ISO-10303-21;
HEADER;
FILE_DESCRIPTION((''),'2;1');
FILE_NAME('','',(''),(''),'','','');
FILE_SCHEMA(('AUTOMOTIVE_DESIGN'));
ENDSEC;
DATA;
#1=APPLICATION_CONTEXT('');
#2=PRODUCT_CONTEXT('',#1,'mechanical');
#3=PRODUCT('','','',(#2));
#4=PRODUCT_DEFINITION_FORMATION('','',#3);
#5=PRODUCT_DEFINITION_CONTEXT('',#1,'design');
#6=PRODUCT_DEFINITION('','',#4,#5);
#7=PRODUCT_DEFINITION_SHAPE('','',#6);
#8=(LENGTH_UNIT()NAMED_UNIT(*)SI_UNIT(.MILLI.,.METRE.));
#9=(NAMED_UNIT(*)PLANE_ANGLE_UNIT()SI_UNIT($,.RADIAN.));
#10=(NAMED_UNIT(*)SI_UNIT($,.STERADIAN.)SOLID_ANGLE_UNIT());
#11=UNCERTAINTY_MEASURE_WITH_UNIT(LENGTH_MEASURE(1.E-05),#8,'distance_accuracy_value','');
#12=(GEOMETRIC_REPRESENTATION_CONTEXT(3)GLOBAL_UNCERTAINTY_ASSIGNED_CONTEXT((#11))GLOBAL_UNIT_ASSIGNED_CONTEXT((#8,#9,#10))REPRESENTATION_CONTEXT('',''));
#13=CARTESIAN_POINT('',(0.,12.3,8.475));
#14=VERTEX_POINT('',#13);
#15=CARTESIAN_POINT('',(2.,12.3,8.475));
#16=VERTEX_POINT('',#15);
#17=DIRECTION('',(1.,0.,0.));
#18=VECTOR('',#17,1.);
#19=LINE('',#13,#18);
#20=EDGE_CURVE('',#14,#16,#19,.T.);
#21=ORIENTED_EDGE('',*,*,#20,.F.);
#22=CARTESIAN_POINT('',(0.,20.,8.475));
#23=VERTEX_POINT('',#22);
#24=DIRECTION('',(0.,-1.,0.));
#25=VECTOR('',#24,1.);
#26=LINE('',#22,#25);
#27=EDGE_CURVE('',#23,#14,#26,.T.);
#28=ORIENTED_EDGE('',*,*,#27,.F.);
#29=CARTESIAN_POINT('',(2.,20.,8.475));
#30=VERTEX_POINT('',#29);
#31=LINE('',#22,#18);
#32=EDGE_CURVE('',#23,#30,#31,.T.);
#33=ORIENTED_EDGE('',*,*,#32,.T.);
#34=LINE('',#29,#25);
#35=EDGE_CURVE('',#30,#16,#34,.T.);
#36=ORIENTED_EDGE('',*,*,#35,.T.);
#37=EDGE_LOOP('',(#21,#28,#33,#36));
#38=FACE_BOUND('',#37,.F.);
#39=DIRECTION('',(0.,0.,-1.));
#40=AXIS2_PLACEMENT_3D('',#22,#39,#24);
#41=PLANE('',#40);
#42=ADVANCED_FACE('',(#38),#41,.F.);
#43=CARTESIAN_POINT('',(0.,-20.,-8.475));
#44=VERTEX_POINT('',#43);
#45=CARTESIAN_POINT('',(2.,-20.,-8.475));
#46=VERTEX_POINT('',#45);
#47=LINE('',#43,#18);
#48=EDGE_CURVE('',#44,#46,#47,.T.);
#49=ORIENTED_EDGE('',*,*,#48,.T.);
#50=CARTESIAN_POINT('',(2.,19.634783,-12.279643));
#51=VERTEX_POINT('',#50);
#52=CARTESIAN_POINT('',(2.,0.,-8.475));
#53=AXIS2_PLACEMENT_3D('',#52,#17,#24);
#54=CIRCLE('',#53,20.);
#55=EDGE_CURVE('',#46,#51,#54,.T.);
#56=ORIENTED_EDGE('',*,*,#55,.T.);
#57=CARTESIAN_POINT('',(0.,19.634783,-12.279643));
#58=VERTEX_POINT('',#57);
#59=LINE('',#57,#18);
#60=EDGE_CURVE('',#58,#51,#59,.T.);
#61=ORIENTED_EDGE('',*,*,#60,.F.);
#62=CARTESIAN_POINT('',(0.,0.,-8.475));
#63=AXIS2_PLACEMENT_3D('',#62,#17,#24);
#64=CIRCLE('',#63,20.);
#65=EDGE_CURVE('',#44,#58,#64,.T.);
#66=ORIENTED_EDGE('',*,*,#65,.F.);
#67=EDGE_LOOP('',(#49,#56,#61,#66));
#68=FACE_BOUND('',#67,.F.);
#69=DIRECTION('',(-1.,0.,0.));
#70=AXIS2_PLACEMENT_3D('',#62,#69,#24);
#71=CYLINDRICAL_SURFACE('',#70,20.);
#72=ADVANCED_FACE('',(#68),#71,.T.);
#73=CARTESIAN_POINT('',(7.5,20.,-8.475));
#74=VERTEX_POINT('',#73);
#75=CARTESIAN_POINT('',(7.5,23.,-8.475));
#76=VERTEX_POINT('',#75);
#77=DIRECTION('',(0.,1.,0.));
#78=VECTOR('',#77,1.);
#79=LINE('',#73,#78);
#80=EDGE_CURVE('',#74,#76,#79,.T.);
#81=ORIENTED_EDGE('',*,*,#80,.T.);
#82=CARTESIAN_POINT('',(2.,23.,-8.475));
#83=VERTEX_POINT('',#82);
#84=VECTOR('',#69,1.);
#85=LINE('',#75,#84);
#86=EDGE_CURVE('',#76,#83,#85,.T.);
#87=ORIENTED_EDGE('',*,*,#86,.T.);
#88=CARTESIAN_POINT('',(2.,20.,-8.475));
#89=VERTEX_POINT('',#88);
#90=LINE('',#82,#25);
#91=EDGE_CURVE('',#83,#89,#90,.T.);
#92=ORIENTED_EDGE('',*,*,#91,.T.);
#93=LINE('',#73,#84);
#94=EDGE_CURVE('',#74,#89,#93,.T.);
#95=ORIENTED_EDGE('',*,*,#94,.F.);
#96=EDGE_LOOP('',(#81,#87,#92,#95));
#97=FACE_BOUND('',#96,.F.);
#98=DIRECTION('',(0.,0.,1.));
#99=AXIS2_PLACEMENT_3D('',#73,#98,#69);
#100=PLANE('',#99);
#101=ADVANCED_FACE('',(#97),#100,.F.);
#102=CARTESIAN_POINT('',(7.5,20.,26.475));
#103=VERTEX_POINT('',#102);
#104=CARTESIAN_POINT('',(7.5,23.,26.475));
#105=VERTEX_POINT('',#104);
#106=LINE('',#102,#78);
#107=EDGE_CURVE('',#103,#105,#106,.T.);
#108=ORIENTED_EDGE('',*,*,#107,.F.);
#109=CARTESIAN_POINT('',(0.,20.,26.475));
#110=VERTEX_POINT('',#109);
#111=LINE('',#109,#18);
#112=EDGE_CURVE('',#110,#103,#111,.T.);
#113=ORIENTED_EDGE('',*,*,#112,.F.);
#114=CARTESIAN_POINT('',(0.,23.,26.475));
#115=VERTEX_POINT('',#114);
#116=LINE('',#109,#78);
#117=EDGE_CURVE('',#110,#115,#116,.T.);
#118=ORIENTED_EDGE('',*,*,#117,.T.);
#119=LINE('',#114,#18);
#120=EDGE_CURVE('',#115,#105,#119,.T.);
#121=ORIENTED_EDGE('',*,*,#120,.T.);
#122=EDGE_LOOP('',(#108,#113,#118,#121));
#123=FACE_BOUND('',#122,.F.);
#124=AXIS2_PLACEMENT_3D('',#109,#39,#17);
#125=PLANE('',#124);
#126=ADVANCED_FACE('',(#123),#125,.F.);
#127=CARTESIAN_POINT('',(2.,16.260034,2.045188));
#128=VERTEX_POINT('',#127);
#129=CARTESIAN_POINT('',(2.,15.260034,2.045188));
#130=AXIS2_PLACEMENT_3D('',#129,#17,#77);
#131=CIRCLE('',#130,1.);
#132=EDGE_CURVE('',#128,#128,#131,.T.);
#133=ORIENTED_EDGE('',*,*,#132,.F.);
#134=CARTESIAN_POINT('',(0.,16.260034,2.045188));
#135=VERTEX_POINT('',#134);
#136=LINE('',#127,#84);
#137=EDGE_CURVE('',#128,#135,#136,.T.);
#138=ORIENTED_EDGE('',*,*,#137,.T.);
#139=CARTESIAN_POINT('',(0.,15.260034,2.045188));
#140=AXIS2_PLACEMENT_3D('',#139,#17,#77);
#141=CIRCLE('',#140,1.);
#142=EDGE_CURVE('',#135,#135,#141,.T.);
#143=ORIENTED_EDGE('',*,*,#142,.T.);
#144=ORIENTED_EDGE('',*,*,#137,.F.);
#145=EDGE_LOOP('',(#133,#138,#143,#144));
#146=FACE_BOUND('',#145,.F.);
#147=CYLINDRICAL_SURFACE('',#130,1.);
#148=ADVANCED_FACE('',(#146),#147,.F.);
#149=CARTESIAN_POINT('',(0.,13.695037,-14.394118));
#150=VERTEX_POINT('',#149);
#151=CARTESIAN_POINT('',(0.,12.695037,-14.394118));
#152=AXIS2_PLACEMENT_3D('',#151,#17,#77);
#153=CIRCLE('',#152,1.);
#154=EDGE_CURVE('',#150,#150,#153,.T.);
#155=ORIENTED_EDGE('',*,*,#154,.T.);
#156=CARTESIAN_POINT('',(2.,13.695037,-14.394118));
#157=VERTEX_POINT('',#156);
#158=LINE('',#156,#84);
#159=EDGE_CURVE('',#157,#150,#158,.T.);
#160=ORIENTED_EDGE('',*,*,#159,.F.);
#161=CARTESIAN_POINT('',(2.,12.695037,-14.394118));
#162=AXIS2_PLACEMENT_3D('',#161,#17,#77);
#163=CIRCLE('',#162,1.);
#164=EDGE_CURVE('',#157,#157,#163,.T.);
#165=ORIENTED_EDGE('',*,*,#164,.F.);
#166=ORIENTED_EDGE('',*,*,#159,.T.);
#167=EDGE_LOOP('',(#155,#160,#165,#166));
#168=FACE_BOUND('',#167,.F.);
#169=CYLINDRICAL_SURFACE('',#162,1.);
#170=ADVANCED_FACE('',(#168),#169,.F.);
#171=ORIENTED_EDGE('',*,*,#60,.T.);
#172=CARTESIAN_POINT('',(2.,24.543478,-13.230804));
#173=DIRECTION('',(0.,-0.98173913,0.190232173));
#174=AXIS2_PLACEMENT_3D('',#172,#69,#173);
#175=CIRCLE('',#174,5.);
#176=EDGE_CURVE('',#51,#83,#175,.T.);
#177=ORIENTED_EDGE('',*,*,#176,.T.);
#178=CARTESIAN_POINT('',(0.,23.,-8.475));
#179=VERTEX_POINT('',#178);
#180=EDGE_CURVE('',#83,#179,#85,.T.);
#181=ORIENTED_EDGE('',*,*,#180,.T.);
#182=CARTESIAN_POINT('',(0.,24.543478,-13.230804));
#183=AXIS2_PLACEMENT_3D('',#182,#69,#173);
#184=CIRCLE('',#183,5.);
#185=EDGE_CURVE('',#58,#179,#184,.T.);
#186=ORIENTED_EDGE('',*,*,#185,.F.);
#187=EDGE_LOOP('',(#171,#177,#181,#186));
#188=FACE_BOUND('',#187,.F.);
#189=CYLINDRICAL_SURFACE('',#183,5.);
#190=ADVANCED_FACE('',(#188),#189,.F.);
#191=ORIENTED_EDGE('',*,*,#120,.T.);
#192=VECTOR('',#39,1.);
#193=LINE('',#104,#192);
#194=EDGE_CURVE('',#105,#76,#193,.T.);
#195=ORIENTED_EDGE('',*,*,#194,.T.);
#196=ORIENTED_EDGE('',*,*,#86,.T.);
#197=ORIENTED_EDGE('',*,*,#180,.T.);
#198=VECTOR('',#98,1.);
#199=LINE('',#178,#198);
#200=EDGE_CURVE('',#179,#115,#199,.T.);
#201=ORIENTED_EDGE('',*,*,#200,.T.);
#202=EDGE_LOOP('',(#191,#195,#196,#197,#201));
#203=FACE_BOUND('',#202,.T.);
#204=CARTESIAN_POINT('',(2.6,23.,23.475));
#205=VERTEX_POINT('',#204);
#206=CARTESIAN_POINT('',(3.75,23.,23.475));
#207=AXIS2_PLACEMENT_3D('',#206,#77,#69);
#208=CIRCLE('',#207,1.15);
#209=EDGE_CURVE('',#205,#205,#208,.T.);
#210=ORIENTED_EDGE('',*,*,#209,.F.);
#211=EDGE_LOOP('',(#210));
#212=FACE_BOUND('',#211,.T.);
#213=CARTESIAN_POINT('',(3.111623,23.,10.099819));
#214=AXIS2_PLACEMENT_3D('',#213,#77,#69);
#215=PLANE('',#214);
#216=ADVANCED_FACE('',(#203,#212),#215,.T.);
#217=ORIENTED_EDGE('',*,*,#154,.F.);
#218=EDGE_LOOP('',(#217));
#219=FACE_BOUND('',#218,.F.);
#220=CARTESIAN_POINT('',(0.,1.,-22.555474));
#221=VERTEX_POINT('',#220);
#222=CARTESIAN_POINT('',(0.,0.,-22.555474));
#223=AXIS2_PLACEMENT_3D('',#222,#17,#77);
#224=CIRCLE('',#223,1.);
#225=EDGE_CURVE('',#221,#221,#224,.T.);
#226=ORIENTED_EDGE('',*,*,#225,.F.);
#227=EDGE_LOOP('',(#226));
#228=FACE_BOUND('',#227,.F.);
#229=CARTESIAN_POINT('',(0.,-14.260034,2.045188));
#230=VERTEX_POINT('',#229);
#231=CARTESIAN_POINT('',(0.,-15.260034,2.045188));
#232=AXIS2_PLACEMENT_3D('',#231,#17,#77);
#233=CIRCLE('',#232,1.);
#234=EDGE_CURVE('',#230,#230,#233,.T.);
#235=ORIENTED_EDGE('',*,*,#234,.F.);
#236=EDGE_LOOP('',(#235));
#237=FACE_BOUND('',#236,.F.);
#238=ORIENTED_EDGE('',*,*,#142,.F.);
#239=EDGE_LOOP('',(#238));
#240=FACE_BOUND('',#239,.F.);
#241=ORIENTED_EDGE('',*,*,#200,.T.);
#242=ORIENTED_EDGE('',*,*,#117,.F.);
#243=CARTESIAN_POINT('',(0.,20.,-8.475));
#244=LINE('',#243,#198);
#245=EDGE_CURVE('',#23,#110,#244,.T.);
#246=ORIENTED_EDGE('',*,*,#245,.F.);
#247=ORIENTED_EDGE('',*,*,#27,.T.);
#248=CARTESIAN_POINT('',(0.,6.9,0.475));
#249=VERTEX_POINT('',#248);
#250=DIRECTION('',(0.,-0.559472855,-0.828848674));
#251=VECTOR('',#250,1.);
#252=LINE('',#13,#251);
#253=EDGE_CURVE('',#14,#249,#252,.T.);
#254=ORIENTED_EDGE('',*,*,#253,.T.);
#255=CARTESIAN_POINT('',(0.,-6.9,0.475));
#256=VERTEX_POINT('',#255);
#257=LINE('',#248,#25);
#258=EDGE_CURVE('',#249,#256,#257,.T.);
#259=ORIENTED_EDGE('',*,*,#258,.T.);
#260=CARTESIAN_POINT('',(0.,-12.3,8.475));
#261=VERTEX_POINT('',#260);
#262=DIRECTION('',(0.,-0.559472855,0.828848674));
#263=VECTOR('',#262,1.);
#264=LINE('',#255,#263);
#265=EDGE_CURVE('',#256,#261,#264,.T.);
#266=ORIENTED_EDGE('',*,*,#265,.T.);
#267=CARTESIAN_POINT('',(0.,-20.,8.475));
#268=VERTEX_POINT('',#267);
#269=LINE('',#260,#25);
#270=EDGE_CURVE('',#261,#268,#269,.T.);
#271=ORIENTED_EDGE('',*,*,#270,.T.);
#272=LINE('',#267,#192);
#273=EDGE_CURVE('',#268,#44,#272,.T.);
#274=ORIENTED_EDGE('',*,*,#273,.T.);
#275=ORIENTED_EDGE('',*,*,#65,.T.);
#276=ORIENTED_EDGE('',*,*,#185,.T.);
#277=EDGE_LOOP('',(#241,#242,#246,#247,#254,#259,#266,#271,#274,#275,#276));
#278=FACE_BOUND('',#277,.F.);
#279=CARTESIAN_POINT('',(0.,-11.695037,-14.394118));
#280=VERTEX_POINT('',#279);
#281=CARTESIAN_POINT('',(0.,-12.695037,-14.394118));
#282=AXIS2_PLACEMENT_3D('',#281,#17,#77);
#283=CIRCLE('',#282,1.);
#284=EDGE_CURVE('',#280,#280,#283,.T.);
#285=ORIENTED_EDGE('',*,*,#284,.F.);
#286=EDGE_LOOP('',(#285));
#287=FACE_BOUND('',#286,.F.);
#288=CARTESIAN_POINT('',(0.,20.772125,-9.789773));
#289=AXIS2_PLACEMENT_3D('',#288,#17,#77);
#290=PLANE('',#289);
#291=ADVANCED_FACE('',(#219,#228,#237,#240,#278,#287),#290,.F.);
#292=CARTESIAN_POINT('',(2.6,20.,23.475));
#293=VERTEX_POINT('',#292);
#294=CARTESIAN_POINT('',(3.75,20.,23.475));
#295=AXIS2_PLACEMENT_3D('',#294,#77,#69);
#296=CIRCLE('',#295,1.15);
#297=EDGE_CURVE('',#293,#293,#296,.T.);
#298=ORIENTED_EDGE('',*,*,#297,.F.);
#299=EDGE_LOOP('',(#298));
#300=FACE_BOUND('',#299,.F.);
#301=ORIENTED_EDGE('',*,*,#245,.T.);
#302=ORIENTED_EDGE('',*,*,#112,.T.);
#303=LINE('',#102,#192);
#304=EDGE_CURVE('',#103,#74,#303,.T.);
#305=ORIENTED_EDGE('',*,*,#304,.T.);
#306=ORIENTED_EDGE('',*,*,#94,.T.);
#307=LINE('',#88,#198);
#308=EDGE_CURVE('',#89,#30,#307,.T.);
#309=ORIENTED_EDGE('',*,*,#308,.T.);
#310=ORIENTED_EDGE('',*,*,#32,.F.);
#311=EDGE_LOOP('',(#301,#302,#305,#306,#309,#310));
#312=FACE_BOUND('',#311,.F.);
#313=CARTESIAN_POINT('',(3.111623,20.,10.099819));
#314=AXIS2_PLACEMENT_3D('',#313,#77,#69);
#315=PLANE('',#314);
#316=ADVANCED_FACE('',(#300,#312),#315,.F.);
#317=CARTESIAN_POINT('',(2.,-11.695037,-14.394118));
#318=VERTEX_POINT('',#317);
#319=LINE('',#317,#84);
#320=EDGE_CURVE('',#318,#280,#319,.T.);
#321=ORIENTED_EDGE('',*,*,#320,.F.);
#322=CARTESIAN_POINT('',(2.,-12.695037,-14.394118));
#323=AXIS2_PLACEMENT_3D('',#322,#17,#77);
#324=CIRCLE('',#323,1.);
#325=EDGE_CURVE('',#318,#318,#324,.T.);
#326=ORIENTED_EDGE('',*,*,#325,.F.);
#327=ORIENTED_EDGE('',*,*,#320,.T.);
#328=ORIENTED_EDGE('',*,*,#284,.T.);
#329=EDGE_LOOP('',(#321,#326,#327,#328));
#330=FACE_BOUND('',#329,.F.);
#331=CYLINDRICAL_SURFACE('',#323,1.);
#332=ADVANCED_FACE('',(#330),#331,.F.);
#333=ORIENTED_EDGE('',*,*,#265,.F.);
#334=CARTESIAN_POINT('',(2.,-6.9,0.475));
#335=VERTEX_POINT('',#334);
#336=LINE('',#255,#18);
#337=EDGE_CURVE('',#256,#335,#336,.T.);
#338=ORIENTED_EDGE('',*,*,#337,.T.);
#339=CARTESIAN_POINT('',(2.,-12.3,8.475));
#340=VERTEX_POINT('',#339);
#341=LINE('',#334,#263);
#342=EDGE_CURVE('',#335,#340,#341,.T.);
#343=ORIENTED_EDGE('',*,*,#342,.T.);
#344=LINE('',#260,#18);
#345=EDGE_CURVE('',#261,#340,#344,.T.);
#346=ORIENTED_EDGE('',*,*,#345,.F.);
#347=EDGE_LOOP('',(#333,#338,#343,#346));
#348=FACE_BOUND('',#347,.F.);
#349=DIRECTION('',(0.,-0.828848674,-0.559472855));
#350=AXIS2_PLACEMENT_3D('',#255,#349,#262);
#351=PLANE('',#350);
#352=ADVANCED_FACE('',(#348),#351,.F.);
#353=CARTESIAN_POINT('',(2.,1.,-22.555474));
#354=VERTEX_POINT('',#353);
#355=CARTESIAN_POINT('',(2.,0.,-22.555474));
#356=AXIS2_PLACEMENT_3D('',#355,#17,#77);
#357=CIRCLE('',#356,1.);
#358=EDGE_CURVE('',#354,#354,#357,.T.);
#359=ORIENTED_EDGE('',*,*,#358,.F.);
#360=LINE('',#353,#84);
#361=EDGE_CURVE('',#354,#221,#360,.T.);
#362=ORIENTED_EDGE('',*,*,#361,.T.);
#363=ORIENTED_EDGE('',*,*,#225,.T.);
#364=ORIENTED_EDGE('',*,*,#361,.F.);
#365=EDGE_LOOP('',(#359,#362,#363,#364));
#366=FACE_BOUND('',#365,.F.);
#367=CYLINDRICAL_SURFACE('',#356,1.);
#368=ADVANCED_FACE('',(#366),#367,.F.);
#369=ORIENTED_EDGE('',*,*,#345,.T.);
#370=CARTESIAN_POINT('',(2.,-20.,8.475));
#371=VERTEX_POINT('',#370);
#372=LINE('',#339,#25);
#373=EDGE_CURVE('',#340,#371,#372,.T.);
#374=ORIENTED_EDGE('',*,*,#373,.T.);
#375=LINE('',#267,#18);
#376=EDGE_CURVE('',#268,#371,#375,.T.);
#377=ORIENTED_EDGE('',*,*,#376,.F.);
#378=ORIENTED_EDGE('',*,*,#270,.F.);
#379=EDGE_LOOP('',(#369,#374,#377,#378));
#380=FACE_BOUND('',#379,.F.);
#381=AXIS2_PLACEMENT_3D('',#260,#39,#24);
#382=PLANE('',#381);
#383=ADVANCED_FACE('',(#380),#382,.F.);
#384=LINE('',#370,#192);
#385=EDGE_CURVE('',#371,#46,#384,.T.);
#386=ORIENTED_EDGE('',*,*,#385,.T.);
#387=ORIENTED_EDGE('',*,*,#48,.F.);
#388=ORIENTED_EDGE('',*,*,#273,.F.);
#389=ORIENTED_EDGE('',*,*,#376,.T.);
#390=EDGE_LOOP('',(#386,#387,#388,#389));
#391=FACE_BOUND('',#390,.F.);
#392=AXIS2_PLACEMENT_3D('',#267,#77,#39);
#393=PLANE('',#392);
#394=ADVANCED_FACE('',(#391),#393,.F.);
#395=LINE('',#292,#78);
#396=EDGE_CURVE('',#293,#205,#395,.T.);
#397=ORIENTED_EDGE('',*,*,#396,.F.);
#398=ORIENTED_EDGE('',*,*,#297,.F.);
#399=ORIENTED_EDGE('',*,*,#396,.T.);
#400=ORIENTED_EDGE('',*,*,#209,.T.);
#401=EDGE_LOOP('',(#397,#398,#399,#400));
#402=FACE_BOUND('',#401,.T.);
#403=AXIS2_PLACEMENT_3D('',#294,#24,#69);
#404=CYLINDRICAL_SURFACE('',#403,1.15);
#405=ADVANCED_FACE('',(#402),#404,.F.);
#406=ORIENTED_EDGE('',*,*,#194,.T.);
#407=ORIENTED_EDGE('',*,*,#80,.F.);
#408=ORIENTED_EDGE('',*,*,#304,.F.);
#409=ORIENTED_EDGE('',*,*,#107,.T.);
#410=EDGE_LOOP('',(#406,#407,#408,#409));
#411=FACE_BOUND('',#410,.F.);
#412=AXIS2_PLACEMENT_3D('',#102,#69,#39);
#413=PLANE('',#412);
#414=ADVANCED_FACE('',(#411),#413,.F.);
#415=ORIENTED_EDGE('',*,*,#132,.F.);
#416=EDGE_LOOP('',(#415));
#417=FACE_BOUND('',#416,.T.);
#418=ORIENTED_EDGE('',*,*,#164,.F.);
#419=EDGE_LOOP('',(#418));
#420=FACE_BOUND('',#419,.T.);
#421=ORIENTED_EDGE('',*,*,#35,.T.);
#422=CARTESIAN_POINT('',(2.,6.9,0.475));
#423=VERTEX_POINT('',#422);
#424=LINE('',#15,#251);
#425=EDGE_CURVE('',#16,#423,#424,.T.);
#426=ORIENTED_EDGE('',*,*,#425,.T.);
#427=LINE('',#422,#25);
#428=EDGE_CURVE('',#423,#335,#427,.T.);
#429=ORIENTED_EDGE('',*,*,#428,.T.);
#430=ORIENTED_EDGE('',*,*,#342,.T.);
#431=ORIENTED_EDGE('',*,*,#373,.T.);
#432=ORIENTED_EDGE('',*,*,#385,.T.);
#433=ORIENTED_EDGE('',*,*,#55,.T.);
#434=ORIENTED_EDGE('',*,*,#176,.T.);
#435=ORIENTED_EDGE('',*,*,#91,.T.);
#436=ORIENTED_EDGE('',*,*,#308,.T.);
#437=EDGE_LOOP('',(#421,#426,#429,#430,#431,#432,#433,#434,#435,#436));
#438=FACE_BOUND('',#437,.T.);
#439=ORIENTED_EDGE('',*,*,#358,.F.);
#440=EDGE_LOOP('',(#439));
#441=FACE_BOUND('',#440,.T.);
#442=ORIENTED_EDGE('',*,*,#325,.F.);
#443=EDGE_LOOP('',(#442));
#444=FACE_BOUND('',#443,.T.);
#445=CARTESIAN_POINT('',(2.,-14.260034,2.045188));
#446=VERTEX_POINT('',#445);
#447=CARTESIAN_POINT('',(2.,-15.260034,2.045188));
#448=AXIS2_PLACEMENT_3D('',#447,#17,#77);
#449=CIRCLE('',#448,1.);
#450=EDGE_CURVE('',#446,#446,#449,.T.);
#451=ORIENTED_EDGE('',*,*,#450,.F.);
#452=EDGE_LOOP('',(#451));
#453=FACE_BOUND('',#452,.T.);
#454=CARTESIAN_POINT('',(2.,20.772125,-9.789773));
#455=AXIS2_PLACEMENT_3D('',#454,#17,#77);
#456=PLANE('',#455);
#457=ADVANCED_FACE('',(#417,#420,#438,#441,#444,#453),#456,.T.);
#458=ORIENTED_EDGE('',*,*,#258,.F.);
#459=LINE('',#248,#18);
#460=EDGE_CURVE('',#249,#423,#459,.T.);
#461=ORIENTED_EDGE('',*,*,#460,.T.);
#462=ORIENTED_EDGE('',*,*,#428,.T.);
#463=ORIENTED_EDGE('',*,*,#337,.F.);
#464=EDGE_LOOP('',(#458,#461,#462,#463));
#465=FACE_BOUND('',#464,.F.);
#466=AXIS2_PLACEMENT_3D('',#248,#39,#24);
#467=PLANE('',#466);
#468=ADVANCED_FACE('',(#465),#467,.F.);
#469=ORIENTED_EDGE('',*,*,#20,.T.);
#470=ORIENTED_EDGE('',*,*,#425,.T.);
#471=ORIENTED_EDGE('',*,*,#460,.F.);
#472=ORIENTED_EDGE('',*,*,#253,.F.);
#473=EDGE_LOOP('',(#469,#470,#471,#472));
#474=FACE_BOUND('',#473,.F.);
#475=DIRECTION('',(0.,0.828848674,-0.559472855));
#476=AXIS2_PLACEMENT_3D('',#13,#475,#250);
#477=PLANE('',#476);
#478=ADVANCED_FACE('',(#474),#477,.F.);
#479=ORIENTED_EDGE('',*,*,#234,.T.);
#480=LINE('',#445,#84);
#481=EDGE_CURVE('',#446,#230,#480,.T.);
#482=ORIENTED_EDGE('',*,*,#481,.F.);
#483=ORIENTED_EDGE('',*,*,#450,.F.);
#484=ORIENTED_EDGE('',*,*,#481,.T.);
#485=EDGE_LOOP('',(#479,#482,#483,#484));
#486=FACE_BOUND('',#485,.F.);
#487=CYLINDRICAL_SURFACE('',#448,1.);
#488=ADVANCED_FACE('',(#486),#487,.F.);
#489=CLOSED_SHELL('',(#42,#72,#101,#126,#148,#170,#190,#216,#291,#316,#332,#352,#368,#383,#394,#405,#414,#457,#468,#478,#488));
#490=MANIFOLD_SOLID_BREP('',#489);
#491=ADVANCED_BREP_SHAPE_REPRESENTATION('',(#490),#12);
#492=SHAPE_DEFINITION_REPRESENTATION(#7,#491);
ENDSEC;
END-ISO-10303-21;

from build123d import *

# Parameters (mm, degrees)
F1_DEPTH    = 2
F2_R        = 1
F3_DEPTH    = 25
F4_R        = 1.15
F5_DEPTH    = 3
F6_T1_DEPTH = 2


# Not quite as in the source:
# - a fillet or chamfer that OpenCascade refuses, or shapes differently, is made with other operations: its cross-section is extruded or revolved along the edge and cut away or added


with BuildPart() as f1:
    # F0 (on Right) → F1 (new body)
    with BuildSketch(Plane.YZ):
        with BuildLine():
            Line((20, -8.475), (20, 8.475))
            Line((20, 8.475), (12.3, 8.475))
            Line((12.3, 8.475), (6.9, 0.475))
            Line((6.9, 0.475), (0, 0.475))
            Line((0, 0.475), (-6.9, 0.475))
            Line((-6.9, 0.475), (-12.3, 8.475))
            Line((-12.3, 8.475), (-20, 8.475))
            Line((-20, 8.475), (-20, -8.475))
            ThreePointArc((-20, -8.475), (0, -28.475), (20, -8.475))
        make_face()
    extrude(amount=F1_DEPTH)

    # F2 (on face) → F3 (cut)
    with BuildSketch(Plane.YZ.offset(2)):
        with Locations((0, -22.5554741919)):
            Circle(F2_R)
        with Locations((-12.6950368285, -14.3941175193)):
            Circle(F2_R)
        with Locations((-15.2600342408, 2.045188332)):
            Circle(F2_R)
        with Locations((12.6950368285, -14.3941175193)):
            Circle(F2_R)
        with Locations((15.2600342408, 2.045188332)):
            Circle(F2_R)
    extrude(amount=-F3_DEPTH, mode=Mode.SUBTRACT)

    # F4 (on face) → F5 (join)
    with BuildSketch(Plane(origin=(0, 20, 0), x_dir=(-1, 0, 0), z_dir=(0, 1, 0))):
        Polygon((0, 8.475), (0, 26.475), (-7.5, 26.475), (-7.5, 8.475), (-2, -8.475), (0, -8.475), align=None)
        with Locations((-3.75, 23.475)):
            Circle(F4_R, mode=Mode.SUBTRACT)
        Polygon((-2, -8.475), (-7.5, 8.475), (-7.5, -8.475), align=None)
    extrude(amount=F5_DEPTH)

    # F6: fillet of radius 5 on 1 edges, made by hand

    # F6_s2 → F6_t1 (join)
    with BuildSketch(Plane.YZ):
        with BuildLine():
            ThreePointArc((19.6347826087, -12.2796434668), (20.7982860057, -9.9181716989), (23, -8.475))
            Line((23, -8.475), (20, -8.475))
            ThreePointArc((20, -8.475), (19.9084862832, -10.3860661718), (19.6347826087, -12.2796434668))
        make_face()
    extrude(amount=F6_T1_DEPTH)


solid = f1.part
